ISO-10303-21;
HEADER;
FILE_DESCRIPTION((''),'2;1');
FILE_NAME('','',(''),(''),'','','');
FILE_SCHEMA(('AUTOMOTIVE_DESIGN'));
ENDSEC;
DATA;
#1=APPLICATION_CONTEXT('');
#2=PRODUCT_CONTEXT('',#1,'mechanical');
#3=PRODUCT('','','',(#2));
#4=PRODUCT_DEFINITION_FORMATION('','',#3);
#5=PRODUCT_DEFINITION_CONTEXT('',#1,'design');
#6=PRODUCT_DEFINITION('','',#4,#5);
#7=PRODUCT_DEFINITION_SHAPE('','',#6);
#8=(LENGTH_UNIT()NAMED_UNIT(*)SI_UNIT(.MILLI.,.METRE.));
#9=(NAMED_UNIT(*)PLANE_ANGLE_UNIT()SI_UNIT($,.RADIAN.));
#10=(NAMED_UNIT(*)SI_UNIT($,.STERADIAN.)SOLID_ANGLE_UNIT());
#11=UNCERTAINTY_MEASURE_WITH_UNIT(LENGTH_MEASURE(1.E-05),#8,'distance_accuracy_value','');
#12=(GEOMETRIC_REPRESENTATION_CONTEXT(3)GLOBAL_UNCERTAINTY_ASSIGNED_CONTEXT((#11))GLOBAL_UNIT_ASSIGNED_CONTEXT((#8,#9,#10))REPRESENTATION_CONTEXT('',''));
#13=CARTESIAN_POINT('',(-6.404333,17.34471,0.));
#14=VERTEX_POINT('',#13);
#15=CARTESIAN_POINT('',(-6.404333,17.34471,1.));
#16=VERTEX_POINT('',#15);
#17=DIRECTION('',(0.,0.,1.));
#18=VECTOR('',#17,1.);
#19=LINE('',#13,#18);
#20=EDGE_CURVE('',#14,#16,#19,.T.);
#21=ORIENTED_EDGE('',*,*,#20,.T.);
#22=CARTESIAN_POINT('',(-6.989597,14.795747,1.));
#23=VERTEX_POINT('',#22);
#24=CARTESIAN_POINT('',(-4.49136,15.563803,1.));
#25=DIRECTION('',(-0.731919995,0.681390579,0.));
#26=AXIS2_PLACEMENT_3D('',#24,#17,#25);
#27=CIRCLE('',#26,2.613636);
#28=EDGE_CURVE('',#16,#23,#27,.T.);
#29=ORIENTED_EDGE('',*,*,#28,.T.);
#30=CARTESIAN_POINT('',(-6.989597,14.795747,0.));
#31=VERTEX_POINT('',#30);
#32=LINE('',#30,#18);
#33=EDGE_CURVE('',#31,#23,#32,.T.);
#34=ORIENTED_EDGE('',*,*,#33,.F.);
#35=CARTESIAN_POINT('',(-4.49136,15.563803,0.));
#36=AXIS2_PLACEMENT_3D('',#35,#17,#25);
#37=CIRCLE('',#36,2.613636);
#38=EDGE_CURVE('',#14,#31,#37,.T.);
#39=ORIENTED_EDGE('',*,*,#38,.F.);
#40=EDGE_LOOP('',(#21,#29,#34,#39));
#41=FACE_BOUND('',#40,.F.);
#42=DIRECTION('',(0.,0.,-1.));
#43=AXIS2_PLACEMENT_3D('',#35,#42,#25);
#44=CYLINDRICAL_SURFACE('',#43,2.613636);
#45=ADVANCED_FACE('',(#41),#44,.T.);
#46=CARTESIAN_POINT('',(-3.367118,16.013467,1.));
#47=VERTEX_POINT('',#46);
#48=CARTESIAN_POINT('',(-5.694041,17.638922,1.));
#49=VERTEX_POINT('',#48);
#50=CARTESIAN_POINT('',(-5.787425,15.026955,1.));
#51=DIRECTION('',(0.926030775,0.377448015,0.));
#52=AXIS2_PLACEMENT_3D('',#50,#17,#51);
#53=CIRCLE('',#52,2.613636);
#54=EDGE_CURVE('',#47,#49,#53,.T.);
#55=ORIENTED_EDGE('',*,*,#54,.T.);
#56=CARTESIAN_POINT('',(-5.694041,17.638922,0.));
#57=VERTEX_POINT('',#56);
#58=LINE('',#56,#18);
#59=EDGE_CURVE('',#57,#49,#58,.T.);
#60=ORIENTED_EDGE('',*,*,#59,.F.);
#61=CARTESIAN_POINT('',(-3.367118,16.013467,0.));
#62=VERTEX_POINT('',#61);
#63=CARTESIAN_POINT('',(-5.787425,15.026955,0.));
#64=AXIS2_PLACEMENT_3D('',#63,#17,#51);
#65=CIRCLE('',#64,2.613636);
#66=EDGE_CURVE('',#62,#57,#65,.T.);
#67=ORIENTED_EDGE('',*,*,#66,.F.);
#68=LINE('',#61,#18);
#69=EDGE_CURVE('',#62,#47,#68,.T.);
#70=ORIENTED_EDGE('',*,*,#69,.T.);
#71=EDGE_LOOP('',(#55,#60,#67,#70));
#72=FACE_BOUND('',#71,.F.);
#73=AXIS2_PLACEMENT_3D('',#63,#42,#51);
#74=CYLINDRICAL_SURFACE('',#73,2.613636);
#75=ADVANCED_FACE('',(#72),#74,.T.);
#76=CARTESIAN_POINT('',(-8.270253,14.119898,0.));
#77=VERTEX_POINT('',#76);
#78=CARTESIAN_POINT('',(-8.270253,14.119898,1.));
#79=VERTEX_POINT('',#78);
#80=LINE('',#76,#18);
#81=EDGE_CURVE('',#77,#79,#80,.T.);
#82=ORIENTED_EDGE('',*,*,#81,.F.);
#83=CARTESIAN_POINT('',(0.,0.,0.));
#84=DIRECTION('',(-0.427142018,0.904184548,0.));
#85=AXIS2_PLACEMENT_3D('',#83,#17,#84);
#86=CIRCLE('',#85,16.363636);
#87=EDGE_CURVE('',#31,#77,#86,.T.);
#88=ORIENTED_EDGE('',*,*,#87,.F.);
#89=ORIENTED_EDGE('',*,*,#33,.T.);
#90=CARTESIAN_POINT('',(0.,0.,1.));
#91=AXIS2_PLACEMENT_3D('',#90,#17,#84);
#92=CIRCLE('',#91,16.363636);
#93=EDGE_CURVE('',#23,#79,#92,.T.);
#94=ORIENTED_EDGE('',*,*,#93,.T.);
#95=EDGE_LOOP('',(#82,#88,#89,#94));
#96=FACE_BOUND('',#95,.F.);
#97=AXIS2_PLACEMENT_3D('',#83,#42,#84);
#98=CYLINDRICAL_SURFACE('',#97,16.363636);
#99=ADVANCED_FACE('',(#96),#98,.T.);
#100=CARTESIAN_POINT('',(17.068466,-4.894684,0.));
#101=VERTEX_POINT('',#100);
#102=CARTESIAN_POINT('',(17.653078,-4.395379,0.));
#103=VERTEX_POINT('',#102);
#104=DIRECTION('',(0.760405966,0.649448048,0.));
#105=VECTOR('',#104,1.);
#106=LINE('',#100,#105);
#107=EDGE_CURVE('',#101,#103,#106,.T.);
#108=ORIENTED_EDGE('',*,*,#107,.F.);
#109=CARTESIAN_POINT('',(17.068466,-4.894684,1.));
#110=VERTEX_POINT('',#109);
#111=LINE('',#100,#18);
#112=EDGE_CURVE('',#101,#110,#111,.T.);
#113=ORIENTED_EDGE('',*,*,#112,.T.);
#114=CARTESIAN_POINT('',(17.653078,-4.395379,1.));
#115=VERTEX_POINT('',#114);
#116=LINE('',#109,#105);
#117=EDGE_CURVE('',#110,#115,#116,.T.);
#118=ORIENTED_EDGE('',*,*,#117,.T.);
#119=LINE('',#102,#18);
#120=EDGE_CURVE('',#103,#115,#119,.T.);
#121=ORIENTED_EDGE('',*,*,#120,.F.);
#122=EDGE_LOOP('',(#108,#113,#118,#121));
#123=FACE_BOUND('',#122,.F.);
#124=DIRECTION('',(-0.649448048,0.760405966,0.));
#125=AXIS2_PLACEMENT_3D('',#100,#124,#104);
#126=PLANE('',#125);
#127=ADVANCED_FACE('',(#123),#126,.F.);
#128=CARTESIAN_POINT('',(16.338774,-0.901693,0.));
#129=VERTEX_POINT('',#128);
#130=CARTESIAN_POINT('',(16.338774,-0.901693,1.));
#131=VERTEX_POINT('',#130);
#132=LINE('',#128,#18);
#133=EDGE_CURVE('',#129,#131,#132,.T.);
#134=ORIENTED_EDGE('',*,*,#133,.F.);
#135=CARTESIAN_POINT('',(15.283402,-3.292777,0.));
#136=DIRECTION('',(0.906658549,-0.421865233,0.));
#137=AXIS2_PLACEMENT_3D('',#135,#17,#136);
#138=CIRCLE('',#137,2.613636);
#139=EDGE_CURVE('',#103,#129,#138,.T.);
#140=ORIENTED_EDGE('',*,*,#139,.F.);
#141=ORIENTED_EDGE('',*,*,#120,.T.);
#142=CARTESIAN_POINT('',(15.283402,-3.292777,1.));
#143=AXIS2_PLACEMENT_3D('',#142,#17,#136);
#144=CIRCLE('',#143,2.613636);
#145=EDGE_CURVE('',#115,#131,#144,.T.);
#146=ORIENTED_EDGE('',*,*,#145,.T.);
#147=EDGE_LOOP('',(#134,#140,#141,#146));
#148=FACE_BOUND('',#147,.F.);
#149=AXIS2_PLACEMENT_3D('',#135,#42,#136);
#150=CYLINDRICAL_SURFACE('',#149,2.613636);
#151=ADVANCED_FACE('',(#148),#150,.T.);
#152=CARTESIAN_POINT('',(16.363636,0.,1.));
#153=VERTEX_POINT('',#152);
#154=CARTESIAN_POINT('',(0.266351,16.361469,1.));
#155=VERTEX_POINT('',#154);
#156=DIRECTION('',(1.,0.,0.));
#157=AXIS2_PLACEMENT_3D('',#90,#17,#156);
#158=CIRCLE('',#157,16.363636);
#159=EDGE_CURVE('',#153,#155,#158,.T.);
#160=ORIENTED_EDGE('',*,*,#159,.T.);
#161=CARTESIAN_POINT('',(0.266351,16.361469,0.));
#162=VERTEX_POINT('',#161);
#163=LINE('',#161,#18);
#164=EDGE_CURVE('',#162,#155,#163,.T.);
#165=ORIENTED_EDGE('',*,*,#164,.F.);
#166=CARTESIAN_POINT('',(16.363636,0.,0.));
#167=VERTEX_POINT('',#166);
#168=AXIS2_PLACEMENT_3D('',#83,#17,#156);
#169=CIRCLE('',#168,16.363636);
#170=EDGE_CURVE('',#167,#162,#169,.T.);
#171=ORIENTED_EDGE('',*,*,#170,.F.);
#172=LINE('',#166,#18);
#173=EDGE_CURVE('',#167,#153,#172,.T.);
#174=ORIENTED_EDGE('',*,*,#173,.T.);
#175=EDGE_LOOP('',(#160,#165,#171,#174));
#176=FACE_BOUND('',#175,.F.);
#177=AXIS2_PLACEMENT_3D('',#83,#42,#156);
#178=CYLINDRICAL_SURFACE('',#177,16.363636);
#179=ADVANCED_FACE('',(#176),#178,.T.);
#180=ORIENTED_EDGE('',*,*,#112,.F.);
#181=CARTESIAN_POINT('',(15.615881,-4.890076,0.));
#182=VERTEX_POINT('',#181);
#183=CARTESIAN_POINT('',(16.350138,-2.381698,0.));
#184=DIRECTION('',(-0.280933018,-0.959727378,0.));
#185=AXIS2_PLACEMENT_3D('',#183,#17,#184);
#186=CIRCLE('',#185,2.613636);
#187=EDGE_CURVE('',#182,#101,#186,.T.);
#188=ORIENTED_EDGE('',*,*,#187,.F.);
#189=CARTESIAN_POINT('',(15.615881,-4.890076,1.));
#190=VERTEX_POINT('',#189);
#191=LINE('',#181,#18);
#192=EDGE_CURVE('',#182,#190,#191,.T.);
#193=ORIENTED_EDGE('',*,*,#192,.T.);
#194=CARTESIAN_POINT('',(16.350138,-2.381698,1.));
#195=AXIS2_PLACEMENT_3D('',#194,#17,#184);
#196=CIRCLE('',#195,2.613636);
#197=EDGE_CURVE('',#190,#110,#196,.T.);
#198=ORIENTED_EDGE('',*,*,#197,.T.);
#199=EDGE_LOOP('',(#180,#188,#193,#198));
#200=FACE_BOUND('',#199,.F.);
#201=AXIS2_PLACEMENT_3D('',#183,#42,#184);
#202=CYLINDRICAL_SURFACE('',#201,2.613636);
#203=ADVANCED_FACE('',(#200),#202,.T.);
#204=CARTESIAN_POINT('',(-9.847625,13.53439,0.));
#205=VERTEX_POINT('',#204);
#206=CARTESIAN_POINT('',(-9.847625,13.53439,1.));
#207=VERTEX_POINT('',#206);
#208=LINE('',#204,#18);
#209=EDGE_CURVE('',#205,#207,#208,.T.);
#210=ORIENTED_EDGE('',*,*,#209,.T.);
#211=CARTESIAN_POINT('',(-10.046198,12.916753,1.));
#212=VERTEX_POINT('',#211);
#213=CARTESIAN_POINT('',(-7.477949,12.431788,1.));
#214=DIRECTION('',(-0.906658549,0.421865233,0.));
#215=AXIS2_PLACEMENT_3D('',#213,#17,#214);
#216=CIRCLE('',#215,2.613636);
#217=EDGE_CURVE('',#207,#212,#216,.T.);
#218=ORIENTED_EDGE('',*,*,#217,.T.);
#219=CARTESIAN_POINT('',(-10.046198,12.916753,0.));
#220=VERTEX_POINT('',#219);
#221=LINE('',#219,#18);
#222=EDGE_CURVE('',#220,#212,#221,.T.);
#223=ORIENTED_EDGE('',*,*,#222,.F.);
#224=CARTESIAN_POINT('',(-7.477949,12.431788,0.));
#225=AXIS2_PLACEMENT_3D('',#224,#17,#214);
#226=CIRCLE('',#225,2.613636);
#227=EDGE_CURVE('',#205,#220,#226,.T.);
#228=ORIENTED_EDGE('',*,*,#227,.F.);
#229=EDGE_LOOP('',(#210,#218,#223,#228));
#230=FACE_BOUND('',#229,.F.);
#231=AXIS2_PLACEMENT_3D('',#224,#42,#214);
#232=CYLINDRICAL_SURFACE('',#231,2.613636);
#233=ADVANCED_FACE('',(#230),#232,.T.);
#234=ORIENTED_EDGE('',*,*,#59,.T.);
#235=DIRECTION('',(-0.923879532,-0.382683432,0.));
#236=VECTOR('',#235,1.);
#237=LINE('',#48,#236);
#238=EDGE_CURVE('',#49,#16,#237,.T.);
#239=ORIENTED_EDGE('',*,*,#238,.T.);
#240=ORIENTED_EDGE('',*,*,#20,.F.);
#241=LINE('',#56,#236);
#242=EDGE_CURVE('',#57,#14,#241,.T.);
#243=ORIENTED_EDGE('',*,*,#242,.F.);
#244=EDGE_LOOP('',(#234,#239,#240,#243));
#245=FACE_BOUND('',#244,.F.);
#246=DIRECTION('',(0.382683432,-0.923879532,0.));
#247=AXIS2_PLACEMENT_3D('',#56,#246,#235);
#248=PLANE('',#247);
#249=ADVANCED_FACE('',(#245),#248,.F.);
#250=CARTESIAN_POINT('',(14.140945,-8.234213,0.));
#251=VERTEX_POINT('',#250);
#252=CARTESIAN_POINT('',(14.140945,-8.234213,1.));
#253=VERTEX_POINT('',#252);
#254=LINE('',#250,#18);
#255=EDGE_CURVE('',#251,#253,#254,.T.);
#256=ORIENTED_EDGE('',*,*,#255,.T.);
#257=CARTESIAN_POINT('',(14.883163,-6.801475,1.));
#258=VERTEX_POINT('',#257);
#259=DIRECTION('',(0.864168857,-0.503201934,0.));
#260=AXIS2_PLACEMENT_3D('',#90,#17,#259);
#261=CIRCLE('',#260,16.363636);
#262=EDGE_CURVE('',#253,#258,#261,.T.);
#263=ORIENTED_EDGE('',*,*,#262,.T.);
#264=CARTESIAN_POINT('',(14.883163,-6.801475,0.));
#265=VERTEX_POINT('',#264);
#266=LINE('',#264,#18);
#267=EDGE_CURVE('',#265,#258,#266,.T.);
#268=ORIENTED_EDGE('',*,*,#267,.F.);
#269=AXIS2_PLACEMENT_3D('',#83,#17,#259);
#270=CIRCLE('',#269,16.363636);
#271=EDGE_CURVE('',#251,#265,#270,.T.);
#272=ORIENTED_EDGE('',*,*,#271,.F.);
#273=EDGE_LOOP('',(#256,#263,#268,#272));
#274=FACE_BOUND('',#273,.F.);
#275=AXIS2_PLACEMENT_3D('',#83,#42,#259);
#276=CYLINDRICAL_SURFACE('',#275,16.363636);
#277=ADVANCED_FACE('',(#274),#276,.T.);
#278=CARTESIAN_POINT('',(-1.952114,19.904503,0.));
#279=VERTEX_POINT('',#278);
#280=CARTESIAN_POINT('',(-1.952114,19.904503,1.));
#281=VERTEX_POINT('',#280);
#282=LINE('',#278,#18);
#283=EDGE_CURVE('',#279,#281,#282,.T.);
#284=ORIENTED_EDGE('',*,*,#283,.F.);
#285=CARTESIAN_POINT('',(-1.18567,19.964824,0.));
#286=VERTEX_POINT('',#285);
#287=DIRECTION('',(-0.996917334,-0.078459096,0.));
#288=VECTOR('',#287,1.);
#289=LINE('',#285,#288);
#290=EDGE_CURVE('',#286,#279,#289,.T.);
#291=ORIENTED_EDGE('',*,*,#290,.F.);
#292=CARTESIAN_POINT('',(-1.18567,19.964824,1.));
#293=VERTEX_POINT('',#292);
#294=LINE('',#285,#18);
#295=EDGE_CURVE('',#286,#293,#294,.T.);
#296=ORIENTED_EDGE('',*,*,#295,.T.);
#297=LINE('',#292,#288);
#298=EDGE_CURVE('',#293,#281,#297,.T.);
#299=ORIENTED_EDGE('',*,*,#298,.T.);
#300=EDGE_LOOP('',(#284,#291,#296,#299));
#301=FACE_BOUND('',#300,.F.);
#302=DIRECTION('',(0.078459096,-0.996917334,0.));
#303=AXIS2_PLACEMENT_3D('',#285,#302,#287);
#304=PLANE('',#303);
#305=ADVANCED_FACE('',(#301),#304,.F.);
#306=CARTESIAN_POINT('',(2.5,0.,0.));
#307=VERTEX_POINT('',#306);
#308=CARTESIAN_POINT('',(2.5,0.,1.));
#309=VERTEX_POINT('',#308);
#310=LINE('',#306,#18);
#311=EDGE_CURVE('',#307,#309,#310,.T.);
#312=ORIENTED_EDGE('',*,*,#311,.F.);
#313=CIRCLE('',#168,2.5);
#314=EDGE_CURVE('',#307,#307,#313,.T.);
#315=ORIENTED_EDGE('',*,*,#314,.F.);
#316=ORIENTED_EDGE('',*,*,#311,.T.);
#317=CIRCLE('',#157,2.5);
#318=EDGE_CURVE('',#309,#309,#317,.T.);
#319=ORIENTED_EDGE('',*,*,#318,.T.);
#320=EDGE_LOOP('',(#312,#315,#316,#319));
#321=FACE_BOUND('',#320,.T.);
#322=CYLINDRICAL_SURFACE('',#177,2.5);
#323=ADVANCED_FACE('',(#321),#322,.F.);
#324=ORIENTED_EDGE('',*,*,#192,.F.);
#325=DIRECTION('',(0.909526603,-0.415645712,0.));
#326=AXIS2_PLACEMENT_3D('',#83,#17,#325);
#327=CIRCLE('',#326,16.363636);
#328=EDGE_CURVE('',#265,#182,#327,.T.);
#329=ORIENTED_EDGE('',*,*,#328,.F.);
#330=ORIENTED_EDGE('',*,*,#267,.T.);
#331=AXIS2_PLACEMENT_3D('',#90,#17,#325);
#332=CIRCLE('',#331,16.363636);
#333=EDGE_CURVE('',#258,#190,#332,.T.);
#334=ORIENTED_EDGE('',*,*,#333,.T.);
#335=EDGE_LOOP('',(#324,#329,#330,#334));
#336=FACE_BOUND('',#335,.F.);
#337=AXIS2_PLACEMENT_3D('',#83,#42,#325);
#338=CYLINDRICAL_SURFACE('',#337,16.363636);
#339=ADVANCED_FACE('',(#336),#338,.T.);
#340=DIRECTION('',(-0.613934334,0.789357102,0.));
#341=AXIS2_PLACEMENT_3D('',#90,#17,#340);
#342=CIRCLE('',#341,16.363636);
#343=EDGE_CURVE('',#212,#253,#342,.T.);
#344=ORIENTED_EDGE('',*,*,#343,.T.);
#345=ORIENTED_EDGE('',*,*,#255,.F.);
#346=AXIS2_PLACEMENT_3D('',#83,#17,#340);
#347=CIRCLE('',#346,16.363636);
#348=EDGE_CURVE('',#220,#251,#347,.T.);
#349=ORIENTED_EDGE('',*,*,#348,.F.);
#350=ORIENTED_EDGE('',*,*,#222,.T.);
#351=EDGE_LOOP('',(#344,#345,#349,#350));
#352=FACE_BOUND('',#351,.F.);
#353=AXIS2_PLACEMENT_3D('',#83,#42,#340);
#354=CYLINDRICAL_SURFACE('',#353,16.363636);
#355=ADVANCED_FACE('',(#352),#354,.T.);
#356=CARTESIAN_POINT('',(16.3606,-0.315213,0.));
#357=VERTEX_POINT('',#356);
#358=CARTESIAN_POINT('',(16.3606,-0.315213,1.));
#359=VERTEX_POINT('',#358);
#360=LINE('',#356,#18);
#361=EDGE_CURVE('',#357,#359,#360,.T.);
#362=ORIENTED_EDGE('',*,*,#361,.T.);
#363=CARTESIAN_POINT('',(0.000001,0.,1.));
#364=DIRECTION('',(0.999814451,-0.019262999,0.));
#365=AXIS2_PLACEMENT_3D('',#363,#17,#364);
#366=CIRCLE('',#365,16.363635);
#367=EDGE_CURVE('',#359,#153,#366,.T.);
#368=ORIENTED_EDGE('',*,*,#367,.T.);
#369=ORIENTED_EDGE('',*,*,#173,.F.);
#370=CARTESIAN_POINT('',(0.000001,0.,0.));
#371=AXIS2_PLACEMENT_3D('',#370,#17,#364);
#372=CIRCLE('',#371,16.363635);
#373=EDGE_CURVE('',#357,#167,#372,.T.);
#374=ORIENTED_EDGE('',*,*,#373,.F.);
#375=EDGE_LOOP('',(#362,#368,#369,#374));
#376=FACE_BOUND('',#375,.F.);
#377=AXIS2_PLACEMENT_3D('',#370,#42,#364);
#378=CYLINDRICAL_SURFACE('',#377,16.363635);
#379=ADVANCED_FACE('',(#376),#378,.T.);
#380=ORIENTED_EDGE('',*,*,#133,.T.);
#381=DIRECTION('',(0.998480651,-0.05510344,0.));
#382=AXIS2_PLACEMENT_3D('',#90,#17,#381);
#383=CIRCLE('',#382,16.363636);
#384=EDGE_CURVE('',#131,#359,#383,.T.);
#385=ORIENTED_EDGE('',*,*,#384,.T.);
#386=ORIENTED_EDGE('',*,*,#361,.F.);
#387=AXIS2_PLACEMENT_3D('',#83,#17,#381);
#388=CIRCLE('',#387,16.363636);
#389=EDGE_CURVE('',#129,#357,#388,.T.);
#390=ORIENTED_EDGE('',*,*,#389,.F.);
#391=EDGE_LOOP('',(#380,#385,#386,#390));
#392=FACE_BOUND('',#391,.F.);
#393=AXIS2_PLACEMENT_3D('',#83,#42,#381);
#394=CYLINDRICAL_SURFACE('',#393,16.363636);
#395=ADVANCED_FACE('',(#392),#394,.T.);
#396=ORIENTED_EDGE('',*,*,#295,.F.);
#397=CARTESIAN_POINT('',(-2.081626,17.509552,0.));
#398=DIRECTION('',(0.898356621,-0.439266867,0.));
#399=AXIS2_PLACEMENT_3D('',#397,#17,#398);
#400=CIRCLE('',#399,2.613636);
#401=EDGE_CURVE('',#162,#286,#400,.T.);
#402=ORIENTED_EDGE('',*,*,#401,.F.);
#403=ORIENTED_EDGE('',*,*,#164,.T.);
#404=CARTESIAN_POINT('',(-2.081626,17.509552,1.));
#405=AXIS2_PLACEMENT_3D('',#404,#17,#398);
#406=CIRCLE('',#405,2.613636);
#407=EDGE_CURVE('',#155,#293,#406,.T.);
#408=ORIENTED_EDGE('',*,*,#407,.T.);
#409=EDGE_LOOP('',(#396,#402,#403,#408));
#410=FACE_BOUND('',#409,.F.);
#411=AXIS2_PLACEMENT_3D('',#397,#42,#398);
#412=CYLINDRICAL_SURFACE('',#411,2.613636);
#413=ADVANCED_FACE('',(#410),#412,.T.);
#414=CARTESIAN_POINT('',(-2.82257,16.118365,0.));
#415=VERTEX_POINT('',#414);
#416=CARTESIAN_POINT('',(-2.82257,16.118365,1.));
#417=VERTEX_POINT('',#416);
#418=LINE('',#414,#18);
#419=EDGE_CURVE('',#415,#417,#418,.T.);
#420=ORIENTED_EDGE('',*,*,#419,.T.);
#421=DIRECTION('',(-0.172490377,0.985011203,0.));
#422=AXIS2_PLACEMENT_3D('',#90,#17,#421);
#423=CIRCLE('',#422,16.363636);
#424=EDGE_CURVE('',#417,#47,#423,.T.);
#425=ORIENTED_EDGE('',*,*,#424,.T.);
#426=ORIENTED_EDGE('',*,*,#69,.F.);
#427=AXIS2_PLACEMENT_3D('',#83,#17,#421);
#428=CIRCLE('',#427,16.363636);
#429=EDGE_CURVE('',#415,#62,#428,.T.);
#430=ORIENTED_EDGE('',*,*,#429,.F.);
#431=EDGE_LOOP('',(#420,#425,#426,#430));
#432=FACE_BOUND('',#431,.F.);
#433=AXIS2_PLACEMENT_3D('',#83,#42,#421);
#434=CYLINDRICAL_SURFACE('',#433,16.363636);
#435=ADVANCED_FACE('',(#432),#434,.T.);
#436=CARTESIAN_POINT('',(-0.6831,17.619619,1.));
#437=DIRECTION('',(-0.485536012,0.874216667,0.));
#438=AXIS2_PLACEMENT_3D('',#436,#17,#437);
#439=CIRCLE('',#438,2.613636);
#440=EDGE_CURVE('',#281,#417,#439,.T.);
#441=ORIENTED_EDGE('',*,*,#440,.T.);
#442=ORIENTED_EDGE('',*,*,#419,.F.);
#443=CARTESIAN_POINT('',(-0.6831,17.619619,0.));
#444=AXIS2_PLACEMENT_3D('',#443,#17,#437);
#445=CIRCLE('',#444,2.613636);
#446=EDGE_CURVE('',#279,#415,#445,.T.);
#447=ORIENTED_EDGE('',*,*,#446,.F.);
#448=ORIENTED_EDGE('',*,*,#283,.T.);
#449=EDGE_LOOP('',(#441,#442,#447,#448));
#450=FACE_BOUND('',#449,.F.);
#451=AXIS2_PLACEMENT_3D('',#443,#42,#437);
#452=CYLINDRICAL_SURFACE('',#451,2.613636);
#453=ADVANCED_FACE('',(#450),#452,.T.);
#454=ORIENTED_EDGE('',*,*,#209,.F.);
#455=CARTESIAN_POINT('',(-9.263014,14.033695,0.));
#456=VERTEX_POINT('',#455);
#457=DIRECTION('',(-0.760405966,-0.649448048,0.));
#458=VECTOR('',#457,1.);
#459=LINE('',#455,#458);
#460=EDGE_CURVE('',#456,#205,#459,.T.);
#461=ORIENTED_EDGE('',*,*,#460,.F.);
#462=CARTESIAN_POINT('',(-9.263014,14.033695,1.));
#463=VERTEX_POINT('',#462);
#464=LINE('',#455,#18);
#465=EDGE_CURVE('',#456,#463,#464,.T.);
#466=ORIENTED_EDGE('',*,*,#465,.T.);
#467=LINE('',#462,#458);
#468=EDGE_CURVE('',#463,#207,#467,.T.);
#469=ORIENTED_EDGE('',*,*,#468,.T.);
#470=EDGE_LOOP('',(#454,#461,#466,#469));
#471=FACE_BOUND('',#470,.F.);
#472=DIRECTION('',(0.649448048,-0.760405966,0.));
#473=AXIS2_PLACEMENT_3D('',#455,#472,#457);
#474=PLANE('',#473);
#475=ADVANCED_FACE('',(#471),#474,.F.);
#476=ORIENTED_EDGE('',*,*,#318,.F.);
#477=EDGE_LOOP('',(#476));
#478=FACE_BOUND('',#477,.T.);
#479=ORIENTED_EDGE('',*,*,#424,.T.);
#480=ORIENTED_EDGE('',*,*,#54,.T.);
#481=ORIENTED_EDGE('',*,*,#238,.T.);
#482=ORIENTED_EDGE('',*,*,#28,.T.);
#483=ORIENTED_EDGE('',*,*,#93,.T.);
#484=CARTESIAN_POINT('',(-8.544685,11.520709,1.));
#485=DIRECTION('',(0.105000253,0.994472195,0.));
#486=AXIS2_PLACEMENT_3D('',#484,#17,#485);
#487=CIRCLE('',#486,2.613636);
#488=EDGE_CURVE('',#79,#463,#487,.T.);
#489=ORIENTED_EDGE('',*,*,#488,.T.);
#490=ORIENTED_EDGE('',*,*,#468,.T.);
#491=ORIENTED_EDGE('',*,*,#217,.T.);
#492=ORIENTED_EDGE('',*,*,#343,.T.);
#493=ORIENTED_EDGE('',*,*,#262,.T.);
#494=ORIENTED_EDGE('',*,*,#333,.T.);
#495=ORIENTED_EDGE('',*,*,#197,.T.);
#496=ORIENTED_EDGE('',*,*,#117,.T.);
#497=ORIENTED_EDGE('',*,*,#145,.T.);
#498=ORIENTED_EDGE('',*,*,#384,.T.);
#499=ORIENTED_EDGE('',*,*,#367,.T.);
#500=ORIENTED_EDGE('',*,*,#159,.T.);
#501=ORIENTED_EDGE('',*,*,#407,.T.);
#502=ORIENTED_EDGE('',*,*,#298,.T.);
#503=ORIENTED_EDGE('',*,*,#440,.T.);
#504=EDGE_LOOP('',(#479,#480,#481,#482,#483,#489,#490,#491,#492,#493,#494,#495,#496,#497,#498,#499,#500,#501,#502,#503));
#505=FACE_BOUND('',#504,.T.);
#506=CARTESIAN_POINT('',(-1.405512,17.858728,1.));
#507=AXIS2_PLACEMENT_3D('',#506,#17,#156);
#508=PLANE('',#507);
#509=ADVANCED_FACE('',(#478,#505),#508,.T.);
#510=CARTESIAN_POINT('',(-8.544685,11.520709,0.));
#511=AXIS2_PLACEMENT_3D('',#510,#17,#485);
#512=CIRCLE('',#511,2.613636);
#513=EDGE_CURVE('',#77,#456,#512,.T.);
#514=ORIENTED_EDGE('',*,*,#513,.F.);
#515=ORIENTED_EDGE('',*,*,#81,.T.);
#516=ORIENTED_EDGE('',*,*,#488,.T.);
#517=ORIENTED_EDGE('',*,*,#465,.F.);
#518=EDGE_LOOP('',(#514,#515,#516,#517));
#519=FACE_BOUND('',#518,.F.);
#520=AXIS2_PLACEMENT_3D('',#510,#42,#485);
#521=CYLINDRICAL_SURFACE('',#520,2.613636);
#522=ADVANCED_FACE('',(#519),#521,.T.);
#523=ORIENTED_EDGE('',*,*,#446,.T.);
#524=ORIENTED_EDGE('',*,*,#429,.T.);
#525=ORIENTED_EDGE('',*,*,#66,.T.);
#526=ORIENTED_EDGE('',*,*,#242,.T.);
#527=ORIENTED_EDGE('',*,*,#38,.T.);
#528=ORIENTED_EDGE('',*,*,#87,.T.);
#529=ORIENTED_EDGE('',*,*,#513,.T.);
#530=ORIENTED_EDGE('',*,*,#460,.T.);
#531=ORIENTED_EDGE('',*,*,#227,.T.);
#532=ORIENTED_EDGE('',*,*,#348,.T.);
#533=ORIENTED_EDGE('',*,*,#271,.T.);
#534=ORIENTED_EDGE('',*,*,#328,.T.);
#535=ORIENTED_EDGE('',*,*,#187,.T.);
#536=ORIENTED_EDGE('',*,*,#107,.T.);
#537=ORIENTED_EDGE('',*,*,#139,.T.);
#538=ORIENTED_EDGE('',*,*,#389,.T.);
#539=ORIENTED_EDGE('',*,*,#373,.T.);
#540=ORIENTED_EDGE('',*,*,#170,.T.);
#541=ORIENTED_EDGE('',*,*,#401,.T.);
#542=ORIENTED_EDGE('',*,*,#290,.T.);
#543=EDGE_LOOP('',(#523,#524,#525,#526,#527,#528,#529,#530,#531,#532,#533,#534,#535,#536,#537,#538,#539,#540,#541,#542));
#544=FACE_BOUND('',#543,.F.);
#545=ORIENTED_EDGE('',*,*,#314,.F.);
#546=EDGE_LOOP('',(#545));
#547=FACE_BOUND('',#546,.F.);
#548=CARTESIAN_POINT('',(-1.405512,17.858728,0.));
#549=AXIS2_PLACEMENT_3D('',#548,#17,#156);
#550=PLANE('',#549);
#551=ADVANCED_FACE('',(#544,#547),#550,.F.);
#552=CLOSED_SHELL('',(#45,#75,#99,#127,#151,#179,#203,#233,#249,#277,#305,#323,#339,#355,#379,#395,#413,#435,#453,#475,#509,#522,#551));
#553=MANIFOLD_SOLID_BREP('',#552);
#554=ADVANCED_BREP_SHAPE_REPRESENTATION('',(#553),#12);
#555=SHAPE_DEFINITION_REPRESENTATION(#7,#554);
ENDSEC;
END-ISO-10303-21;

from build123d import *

# Parameters (mm, degrees)
F1_R     = 2.5
F2_DEPTH = 1


with BuildPart() as f2:
    # F1 (on Top) → F2 (new body)
    with BuildSketch(Plane.XY):
        with BuildLine():
            ThreePointArc((-2.8225697973, 16.1183651398), (-1.2838761119, 16.3131927338), (0.2663514513, 16.3614685143))
            ThreePointArc((0.2663514513, 16.3614685143), (0.3425890016, 18.4864230236), (-1.1856698611, 19.9648237403))
            Line((-1.1856698611, 19.9648237403), (-1.9521142238, 19.9045032607))
            ThreePointArc((-1.9521142238, 19.9045032607), (-3.2302848587, 18.2052317525), (-2.8225697973, 16.1183651398))
        make_face()
        with BuildLine():
            ThreePointArc((16.360600111, -0.3152127039), (16.3628772829, -0.1576136634), (16.3636363636, 0))
            ThreePointArc((16.3636363636, 0), (11.6646275838, 11.4762824283), (0.2663514513, 16.3614685143))
            ThreePointArc((0.2663514513, 16.3614685143), (-1.2838761119, 16.3131927338), (-2.8225697973, 16.1183651398))
            ThreePointArc((-2.8225697973, 16.1183651398), (-3.0952881484, 16.0682228737), (-3.3671176898, 16.0134666298))
            ThreePointArc((-3.3671176898, 16.0134666298), (-5.2140285038, 15.5107221561), (-6.9895966639, 14.7957471429))
            ThreePointArc((-6.9895966639, 14.7957471429), (-7.637404231, 14.4719954275), (-8.2702526578, 14.1198978756))
            ThreePointArc((-8.2702526578, 14.1198978756), (-9.1779617865, 13.5474577869), (-10.0461981882, 12.9167525719))
            ThreePointArc((-10.0461981882, 12.9167525719), (-10.7718419373, -12.3181174016), (14.1409449401, -8.2342134562))
            ThreePointArc((14.1409449401, -8.2342134562), (14.5297243379, -7.5269984527), (14.8831626027, -6.8014752798))
            ThreePointArc((14.8831626027, -6.8014752798), (15.2794397939, -5.8572446275), (15.6158812541, -4.8900764513))
            ThreePointArc((15.6158812541, -4.8900764513), (16.1012982128, -2.9183541432), (16.3387742935, -0.9016926457))
            ThreePointArc((16.3387742935, -0.9016926457), (16.352316695, -0.6085505312), (16.360600111, -0.3152127039))
        make_face()
        Circle(F1_R, mode=Mode.SUBTRACT)
        with BuildLine():
            ThreePointArc((-6.9895966639, 14.7957471429), (-5.2140285038, 15.5107221561), (-3.3671176898, 16.0134666298))
            ThreePointArc((-3.3671176898, 16.0134666298), (-4.2906994467, 17.1695948436), (-5.6940409736, 17.6389223059))
            Line((-5.6940409736, 17.6389223059), (-6.4043328259, 17.3447097874))
            ThreePointArc((-6.4043328259, 17.3447097874), (-7.0387105861, 16.1486962619), (-6.9895966639, 14.7957471429))
        make_face()
        with BuildLine():
            ThreePointArc((-10.0461981882, 12.9167525719), (-9.1779617865, 13.5474577869), (-8.2702526578, 14.1198978756))
            ThreePointArc((-8.2702526578, 14.1198978756), (-8.7707794497, 14.1245479657), (-9.2630136276, 14.0336952997))
            Line((-9.2630136276, 14.0336952997), (-9.847624654, 13.5343903136))
            ThreePointArc((-9.847624654, 13.5343903136), (-9.9661500626, 13.2317567594), (-10.0461981882, 12.9167525719))
        make_face()
        with BuildLine():
            ThreePointArc((17.6530775237, -4.3953792078), (17.7296643017, -2.3725080911), (16.3387742935, -0.9016926457))
            ThreePointArc((16.3387742935, -0.9016926457), (16.1012982128, -2.9183541432), (15.6158812541, -4.8900764513))
            ThreePointArc((15.6158812541, -4.8900764513), (16.3418473368, -4.9953212922), (17.0684664973, -4.894684194))
            Line((17.0684664973, -4.894684194), (17.6530775237, -4.3953792078))
        make_face()
    extrude(amount=F2_DEPTH)


solid = f2.part
